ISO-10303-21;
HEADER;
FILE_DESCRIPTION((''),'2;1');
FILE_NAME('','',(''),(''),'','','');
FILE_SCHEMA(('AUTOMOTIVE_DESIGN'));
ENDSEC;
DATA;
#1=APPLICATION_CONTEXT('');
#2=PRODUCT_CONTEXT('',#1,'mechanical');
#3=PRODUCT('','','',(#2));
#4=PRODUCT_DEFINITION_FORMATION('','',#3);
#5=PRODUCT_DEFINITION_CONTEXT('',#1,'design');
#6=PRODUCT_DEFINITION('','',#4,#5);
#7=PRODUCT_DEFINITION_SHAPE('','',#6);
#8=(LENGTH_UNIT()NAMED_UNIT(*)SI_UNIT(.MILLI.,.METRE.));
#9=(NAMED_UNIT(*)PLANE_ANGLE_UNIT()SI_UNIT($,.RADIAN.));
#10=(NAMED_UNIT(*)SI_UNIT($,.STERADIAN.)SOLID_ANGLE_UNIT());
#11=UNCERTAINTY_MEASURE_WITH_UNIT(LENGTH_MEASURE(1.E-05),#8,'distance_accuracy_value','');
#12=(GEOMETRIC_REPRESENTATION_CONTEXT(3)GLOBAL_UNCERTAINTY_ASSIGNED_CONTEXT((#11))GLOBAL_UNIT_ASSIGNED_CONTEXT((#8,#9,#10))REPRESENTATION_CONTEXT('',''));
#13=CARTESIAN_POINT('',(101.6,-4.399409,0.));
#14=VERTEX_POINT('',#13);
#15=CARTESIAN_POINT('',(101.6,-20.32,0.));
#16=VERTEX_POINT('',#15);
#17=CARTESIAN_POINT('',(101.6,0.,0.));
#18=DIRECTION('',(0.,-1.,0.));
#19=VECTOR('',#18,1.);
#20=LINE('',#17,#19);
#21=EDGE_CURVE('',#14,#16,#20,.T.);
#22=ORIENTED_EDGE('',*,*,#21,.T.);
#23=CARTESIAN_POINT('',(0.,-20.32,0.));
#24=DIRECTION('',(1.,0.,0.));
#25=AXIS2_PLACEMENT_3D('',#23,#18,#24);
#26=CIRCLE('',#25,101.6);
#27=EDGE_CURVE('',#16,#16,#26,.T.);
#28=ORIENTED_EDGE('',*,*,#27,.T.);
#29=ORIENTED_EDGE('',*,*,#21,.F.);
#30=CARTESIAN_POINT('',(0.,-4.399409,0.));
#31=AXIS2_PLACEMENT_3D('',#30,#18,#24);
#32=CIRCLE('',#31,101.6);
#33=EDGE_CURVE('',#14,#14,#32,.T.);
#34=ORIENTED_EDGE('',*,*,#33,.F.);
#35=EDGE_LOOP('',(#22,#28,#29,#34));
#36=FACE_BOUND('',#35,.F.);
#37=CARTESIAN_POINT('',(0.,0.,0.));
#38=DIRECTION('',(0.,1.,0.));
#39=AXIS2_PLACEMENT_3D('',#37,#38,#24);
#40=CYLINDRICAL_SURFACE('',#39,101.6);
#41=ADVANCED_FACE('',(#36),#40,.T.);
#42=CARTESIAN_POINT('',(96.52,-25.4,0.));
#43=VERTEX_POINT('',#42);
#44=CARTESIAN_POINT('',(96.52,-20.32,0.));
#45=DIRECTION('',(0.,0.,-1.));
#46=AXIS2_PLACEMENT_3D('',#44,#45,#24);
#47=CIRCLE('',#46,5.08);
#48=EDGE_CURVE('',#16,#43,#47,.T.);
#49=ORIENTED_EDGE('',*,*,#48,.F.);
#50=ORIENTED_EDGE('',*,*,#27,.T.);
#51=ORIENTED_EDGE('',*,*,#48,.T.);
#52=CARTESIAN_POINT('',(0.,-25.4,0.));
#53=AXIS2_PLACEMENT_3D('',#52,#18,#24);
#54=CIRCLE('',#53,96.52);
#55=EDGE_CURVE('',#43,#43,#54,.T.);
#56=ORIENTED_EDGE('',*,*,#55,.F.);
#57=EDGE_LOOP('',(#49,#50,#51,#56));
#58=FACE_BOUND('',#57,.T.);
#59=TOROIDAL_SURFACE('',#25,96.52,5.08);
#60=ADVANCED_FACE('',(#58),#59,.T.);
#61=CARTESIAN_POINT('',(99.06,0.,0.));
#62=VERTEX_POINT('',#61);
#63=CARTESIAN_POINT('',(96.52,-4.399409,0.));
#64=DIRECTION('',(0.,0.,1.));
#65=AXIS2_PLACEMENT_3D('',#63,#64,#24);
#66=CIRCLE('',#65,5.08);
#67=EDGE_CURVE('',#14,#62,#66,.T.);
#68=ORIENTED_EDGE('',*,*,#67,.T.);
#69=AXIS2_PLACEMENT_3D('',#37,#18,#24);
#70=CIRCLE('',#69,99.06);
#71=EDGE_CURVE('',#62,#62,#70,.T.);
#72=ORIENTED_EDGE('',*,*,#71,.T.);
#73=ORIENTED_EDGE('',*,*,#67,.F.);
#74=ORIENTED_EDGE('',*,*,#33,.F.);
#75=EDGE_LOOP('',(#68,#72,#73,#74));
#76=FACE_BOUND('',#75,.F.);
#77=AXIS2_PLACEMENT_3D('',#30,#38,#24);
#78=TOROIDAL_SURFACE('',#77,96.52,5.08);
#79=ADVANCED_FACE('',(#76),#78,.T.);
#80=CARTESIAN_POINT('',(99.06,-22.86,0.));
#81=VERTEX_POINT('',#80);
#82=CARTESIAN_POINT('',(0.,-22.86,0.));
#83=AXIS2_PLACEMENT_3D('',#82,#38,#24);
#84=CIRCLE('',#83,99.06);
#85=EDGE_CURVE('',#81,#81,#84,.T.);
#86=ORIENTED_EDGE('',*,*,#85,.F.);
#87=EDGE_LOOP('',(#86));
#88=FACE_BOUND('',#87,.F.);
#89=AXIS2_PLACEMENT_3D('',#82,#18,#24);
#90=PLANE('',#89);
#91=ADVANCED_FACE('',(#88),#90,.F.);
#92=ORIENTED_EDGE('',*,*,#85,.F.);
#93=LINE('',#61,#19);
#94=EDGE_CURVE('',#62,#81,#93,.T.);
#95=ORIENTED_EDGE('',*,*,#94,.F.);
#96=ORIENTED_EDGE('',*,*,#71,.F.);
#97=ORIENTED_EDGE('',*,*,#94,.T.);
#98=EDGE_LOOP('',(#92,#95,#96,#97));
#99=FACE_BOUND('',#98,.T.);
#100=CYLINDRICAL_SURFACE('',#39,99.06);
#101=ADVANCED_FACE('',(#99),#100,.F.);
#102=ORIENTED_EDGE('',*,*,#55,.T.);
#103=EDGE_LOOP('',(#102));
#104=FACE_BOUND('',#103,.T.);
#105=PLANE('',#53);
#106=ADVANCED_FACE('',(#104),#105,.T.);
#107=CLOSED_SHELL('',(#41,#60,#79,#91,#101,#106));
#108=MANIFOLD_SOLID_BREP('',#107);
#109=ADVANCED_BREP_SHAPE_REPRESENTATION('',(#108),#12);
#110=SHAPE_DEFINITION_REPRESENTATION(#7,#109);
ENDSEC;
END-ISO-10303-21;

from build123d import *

# Parameters (mm, degrees)
F0_R     = 101.6
F1_DEPTH = 25.4
F2_T     = -2.54


# Not quite as in the source:
# - a fillet or chamfer that OpenCascade refuses, or shapes differently, is made with other operations: its cross-section is extruded or revolved along the edge and cut away or added


with BuildPart() as f1:
    # F0 (on Front) → F1 (new body)
    with BuildSketch(Plane.XZ):
        Circle(F0_R)
    extrude(amount=F1_DEPTH)

    # F2
    f2_openings = [f1.faces().sort_by_distance(p)[0] for p in [
        (0, 0, 0),
    ]]
    offset(amount=F2_T, openings=f2_openings)

    # F3: fillet of radius 5.08 on 2 edges, made by hand

    # F3_s1 → F3_t2 (revolve, cut)
    with BuildSketch(Plane.XY):
        with BuildLine():
            ThreePointArc((101.6, -20.32), (100.1121024484, -23.9121024484), (96.52, -25.4))
            Line((96.52, -25.4), (101.6, -25.4))
            Line((101.6, -25.4), (101.6, -20.32))
        make_face()
    revolve(axis=Axis((0, -25.4, 0), (0, -1, 0)), mode=Mode.SUBTRACT)

    # F3_s3 → F3_t4 (revolve, cut)
    with BuildSketch(Plane.XY):
        with BuildLine():
            ThreePointArc((101.6, -4.3994090512), (100.9194090512, -1.8594090512), (99.06, 0))
            Line((99.06, 0), (101.6, 0))
            Line((101.6, 0), (101.6, -4.3994090512))
        make_face()
    revolve(axis=Axis((0, 0, 0), (0, -1, 0)), mode=Mode.SUBTRACT)


solid = f1.part
